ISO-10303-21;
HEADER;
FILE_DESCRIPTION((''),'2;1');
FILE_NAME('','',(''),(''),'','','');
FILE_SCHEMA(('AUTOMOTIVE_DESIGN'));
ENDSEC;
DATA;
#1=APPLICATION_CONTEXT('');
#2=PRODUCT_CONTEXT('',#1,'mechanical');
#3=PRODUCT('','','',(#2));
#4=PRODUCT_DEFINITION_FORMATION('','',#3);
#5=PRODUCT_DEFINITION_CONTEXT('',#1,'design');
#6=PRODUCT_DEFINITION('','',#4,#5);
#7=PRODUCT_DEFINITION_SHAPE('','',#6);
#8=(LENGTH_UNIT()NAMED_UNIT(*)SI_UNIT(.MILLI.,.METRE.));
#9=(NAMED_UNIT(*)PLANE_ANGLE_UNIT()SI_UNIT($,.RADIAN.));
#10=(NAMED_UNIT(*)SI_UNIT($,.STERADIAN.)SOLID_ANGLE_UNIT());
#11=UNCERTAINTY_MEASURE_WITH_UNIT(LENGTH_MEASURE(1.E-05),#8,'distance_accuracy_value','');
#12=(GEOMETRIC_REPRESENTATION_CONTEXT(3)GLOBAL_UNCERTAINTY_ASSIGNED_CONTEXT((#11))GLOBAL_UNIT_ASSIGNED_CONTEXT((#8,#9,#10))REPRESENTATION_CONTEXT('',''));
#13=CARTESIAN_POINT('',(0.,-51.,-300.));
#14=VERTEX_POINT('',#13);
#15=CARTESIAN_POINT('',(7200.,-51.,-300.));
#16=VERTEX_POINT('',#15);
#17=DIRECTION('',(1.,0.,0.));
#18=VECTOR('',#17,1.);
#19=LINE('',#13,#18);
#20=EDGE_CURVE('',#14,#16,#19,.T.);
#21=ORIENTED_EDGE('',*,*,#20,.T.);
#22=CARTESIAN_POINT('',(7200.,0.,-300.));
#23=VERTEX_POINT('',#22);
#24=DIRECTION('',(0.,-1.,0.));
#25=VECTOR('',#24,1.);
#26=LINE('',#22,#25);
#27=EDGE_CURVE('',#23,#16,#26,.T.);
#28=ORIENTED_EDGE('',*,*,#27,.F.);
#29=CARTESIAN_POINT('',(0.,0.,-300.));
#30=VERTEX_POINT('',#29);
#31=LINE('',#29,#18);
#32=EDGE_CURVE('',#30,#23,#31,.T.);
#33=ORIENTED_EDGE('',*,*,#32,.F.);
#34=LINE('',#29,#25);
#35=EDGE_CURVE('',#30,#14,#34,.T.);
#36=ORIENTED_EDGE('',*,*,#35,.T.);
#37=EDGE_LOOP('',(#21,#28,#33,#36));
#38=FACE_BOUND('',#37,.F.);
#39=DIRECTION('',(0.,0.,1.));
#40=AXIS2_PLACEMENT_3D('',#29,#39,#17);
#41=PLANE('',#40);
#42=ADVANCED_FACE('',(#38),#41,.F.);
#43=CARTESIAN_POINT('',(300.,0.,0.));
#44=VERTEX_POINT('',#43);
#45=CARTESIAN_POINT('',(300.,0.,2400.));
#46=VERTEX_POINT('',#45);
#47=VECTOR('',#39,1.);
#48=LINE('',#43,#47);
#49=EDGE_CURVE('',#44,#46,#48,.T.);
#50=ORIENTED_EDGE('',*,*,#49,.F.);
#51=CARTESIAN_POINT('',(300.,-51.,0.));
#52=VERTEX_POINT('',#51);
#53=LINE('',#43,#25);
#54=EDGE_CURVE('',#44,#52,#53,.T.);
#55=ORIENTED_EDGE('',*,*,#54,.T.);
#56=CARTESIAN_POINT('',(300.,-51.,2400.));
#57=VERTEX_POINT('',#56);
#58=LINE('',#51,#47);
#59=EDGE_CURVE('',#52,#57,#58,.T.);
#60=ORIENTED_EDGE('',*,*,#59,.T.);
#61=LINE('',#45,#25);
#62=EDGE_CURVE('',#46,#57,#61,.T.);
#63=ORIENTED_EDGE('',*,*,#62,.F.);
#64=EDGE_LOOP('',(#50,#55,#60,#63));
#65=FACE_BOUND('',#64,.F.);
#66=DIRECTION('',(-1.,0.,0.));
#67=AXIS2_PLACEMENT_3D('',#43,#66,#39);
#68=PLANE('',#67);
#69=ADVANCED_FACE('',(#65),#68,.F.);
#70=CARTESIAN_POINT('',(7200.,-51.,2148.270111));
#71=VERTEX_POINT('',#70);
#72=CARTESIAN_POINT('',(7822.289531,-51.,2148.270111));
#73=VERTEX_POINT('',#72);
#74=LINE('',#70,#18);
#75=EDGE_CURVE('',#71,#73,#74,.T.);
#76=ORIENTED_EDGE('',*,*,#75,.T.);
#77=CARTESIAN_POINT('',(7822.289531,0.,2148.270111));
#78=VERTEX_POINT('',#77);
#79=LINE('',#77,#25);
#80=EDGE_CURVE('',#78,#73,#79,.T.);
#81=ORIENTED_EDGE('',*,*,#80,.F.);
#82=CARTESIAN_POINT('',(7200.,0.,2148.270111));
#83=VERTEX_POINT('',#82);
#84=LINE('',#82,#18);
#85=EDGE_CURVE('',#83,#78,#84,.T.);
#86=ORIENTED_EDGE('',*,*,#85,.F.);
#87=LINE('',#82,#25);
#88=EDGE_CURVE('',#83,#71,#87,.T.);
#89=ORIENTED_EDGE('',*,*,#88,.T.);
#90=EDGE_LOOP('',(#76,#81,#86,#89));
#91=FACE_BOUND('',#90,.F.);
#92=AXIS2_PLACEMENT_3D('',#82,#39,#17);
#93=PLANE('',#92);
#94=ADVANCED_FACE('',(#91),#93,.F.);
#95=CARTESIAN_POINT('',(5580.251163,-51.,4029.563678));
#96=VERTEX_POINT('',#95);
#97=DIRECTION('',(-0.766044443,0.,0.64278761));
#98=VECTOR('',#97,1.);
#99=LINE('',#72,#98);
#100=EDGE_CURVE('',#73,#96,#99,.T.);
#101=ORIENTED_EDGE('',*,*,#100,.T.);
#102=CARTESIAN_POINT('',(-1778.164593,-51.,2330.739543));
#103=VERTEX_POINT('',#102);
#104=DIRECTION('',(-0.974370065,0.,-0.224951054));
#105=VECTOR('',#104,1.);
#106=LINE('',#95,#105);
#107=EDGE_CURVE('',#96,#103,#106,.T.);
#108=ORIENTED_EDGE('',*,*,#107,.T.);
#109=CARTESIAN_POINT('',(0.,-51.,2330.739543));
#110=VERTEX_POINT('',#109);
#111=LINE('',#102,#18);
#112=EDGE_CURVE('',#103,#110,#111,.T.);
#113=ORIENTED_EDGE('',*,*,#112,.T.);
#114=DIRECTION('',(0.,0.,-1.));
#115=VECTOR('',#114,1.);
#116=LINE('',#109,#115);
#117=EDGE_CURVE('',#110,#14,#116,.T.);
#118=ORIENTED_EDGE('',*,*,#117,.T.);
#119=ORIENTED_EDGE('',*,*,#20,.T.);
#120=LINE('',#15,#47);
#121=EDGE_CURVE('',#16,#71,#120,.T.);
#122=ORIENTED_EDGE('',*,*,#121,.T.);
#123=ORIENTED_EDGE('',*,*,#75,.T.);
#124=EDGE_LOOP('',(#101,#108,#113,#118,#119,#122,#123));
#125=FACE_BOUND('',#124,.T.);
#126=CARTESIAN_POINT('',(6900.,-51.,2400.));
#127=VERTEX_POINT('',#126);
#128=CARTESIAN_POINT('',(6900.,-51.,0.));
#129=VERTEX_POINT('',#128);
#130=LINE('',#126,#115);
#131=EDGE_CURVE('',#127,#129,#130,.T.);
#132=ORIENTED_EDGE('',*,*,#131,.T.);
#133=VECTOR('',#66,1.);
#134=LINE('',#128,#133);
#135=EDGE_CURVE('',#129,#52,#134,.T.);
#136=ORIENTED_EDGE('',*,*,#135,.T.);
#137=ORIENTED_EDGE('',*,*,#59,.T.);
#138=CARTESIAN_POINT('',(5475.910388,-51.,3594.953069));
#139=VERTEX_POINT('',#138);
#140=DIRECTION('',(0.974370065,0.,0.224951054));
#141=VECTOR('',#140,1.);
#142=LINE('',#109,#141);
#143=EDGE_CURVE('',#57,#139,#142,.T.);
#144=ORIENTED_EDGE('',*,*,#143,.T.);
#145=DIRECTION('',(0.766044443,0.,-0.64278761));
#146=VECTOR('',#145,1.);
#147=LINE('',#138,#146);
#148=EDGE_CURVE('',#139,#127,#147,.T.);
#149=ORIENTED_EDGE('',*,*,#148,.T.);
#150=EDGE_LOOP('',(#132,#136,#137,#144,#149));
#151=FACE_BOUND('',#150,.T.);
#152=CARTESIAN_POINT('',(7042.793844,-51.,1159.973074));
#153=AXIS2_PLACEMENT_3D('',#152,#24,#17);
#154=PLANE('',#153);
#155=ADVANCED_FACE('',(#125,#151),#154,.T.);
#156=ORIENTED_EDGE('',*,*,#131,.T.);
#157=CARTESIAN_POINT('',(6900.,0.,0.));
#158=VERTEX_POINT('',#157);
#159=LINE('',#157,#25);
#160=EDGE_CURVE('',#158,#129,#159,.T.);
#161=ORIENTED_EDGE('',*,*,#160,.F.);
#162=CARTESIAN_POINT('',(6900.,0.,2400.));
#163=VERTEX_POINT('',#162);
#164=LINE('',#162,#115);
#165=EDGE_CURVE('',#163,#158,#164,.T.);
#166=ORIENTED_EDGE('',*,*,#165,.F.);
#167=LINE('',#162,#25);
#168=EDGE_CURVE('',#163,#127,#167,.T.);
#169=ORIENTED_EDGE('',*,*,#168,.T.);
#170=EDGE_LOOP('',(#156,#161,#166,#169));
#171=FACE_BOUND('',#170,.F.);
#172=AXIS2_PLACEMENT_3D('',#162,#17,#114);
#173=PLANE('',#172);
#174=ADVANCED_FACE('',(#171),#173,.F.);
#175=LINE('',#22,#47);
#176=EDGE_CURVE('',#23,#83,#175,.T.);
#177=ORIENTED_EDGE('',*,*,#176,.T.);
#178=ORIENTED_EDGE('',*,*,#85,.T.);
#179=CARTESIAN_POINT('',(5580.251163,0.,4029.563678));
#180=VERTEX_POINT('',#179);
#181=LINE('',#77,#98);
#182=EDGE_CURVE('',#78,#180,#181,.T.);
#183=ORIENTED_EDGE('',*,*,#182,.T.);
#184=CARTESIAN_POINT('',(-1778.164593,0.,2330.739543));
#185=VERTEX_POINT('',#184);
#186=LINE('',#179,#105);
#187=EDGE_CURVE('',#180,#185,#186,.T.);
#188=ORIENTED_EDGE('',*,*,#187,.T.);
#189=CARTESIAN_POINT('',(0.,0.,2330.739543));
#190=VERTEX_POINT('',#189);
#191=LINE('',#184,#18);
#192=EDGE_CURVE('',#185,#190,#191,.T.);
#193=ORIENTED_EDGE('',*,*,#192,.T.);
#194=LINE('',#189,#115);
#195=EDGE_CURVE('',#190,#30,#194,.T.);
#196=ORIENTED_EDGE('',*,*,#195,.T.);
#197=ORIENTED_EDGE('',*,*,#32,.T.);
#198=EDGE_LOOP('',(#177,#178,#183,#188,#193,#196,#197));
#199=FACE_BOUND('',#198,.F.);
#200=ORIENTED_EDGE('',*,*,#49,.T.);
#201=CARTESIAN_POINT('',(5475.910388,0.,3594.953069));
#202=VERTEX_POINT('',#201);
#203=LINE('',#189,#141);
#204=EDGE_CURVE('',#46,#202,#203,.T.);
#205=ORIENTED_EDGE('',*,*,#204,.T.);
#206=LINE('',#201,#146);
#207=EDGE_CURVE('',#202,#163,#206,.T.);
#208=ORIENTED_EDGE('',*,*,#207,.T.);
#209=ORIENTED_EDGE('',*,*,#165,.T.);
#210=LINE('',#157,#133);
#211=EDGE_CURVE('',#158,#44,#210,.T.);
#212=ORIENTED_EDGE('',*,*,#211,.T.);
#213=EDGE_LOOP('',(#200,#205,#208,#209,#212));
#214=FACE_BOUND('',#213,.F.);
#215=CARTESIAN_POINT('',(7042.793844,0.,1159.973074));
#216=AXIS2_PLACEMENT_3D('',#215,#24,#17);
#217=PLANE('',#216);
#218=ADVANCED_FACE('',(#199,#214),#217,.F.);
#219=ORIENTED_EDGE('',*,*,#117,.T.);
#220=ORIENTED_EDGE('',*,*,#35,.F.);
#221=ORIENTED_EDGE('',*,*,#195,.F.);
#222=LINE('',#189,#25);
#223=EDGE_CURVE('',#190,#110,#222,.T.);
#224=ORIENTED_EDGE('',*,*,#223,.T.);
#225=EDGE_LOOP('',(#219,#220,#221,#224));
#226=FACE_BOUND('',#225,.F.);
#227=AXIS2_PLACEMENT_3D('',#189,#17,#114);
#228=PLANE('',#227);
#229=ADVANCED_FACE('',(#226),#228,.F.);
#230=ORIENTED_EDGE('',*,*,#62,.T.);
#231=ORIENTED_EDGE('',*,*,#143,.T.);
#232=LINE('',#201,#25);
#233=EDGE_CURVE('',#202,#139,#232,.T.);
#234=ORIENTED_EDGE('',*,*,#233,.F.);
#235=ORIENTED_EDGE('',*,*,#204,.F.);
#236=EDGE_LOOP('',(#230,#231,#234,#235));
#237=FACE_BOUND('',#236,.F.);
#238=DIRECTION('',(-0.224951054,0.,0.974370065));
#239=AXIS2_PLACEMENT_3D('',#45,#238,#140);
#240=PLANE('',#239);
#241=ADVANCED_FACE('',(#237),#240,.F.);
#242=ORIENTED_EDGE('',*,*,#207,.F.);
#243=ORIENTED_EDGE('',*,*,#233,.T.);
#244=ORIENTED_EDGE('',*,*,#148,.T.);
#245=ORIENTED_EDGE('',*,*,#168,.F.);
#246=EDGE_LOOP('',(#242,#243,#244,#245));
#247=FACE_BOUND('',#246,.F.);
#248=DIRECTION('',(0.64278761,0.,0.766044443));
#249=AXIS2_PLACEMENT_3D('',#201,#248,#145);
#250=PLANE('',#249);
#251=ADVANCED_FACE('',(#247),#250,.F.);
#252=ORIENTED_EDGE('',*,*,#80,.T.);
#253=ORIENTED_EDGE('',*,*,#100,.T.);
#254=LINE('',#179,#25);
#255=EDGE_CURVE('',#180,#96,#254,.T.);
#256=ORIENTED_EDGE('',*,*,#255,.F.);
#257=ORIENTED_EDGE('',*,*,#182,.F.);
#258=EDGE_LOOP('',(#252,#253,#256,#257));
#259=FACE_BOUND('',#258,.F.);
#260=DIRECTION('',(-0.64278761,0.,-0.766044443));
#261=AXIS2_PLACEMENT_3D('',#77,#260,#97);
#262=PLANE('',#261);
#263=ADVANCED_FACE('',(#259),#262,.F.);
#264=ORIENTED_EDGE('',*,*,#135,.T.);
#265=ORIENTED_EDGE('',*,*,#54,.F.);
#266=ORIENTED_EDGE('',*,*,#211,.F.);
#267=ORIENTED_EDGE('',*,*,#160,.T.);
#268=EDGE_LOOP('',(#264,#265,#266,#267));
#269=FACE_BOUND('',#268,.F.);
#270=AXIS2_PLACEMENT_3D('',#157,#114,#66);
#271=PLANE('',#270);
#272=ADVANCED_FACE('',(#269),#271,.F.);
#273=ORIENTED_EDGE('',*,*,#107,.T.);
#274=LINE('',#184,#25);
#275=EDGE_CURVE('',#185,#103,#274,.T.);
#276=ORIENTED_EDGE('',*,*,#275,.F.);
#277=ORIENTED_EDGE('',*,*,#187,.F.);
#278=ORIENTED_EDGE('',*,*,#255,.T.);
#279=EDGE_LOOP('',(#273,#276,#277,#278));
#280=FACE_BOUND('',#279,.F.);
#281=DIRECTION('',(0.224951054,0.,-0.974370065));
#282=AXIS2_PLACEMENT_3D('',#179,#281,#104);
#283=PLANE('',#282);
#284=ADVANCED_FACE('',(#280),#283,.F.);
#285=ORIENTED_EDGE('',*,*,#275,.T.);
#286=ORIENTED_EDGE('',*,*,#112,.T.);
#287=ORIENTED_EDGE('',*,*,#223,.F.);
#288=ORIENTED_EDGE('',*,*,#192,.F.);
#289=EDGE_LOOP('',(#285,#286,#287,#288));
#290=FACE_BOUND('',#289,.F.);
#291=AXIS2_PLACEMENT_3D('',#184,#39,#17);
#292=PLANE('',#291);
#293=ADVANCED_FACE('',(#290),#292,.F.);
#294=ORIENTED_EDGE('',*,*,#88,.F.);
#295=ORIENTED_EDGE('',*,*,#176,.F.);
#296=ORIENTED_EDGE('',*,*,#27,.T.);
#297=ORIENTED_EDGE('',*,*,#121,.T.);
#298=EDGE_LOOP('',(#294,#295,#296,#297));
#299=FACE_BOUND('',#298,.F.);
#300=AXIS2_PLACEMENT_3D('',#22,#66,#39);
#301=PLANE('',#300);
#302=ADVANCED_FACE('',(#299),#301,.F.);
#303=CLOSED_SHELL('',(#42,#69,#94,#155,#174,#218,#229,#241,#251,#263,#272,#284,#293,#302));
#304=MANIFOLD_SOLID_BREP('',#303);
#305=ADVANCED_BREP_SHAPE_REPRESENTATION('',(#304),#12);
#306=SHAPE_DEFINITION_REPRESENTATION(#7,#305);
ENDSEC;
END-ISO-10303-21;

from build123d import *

# Parameters (mm, degrees)
F1_DEPTH = 51


# Not quite as in the source:
# - a feature of the source that left no trace in its solid (it failed there, or was rolled back) is left out
# - a feature names something its author has since deleted; it is built from what else it names


with BuildPart() as f1:
    # F0 (on Front) → F1 (new body)
    with BuildSketch(Plane.XZ):
        Polygon((6900, 2400), (6900, 0), (7200, 0), (7200, 2148.2701106468), align=None)
        Polygon((-1778.1645930343, 2330.7395426623), (0, 2330.7395426623), (300, 2400), (5475.9103875206, 3594.9530685949), (6900, 2400), (7200, 2148.2701106468), (7822.2895307442, 2148.2701106468), (5580.2511632789, 4029.5636778722), align=None)
        Polygon((300, 0), (0, 0), (0, -300), (7200, -300), (7200, 0), (6900, 0), align=None)
        Polygon((0, 2330.7395426623), (0, 0), (300, 0), (300, 2400), align=None)
    extrude(amount=F1_DEPTH)


solid = f1.part
